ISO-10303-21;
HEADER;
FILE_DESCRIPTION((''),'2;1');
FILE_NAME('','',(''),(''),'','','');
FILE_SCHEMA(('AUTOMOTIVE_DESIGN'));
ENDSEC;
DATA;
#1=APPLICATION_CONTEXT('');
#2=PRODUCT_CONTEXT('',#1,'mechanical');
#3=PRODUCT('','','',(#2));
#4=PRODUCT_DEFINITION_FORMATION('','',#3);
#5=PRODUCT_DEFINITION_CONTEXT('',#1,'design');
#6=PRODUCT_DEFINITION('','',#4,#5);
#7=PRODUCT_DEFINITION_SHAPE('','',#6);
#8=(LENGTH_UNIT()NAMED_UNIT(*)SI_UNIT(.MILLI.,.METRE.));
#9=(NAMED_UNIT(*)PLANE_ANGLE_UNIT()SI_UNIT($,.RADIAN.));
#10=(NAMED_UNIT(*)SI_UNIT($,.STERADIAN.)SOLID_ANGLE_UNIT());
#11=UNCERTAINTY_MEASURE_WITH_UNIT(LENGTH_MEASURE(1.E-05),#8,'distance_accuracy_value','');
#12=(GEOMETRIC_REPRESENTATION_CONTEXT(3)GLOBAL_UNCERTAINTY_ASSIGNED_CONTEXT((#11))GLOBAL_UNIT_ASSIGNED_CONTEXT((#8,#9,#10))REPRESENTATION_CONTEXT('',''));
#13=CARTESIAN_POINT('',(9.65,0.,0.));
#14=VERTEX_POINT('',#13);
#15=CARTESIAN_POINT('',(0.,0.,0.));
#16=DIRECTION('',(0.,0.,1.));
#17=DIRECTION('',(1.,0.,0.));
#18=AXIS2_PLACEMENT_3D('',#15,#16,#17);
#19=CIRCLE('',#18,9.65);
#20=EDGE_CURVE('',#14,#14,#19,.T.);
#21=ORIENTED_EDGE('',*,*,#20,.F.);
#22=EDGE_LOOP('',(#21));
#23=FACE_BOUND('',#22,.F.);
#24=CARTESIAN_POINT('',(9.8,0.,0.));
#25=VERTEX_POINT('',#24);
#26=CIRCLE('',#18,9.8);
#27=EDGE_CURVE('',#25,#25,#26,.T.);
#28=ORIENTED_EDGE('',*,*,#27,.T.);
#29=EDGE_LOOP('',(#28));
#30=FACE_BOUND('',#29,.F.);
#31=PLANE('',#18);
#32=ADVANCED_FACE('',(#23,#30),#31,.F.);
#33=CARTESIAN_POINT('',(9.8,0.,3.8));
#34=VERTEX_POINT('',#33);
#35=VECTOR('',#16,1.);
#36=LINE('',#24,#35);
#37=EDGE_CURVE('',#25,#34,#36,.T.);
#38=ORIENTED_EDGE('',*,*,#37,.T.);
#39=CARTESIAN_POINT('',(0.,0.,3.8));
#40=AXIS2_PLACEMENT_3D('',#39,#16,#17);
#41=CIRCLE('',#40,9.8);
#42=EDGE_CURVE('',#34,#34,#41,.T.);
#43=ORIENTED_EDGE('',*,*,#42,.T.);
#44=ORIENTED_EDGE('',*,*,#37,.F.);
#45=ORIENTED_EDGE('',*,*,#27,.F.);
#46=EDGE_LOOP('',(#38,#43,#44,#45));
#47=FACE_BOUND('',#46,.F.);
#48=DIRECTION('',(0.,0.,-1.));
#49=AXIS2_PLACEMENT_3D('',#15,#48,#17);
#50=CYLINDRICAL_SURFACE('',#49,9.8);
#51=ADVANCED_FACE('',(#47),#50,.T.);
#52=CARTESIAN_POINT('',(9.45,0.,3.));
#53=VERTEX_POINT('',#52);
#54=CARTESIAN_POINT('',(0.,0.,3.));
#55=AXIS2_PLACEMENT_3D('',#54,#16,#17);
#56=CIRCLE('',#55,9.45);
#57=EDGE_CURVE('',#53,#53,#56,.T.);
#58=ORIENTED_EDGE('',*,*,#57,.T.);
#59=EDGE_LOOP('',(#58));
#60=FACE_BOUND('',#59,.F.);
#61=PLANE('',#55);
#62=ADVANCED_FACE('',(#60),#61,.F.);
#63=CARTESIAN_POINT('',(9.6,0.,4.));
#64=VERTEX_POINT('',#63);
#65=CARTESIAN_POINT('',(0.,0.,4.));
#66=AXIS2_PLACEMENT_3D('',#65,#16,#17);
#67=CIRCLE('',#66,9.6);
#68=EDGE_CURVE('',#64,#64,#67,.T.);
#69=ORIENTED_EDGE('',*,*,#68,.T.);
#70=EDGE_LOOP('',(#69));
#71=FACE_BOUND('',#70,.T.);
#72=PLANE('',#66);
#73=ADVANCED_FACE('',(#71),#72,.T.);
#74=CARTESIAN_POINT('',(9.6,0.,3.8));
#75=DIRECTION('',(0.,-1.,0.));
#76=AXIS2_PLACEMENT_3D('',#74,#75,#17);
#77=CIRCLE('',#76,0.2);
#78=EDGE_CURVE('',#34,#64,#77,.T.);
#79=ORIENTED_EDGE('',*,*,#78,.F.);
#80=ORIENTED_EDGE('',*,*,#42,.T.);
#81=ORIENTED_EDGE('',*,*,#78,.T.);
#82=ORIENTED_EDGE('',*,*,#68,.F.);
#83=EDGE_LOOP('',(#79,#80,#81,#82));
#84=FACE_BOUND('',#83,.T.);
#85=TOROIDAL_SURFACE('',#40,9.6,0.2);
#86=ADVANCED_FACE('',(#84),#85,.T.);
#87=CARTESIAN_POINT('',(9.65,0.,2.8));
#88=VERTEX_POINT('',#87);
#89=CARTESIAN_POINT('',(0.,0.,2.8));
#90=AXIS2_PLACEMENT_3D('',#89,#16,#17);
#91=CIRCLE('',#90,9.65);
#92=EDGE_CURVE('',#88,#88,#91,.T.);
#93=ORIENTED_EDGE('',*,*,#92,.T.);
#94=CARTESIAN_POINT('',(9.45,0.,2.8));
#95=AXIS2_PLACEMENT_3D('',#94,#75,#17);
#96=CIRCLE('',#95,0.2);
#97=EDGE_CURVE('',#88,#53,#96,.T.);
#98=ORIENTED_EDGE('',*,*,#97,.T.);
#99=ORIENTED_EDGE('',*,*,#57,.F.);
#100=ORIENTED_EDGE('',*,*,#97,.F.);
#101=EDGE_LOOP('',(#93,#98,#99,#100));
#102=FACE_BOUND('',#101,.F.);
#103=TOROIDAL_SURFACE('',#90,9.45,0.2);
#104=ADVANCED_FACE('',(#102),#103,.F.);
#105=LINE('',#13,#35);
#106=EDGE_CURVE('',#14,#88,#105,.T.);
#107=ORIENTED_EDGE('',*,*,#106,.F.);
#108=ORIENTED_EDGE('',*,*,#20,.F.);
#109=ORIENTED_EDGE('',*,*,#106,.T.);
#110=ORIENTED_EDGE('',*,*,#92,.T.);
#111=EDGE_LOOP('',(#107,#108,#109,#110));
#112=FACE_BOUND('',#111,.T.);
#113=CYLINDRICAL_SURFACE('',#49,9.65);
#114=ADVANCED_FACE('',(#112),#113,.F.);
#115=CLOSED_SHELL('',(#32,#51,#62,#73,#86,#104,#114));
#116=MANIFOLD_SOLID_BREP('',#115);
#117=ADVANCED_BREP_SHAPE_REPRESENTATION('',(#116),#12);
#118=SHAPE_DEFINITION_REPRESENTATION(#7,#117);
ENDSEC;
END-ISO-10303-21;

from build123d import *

# Parameters (mm, degrees)
F0_R     = 9.8
F0_R_2   = 9.65
F1_DEPTH = 4
F2_DEPTH = 3
F3_R     = 0.2


with BuildPart() as f1:
    # F0 (on Top) → F1 (new body)
    with BuildSketch(Plane.XY):
        Circle(F0_R)
        Circle(F0_R_2, mode=Mode.SUBTRACT)
        Circle(F0_R_2)
    extrude(amount=F1_DEPTH)

    # F0 (on Top) → F2 (cut)
    with BuildSketch(Plane.XY):
        Circle(F0_R_2)
    extrude(amount=F2_DEPTH, mode=Mode.SUBTRACT)

    # F3
    f3_edges = [f1.edges().sort_by_distance(p)[0] for p in [
        (-9.8, 0, 4),
        (-9.65, 0, 3),
    ]]
    fillet(f3_edges, radius=F3_R)


solid = f1.part
